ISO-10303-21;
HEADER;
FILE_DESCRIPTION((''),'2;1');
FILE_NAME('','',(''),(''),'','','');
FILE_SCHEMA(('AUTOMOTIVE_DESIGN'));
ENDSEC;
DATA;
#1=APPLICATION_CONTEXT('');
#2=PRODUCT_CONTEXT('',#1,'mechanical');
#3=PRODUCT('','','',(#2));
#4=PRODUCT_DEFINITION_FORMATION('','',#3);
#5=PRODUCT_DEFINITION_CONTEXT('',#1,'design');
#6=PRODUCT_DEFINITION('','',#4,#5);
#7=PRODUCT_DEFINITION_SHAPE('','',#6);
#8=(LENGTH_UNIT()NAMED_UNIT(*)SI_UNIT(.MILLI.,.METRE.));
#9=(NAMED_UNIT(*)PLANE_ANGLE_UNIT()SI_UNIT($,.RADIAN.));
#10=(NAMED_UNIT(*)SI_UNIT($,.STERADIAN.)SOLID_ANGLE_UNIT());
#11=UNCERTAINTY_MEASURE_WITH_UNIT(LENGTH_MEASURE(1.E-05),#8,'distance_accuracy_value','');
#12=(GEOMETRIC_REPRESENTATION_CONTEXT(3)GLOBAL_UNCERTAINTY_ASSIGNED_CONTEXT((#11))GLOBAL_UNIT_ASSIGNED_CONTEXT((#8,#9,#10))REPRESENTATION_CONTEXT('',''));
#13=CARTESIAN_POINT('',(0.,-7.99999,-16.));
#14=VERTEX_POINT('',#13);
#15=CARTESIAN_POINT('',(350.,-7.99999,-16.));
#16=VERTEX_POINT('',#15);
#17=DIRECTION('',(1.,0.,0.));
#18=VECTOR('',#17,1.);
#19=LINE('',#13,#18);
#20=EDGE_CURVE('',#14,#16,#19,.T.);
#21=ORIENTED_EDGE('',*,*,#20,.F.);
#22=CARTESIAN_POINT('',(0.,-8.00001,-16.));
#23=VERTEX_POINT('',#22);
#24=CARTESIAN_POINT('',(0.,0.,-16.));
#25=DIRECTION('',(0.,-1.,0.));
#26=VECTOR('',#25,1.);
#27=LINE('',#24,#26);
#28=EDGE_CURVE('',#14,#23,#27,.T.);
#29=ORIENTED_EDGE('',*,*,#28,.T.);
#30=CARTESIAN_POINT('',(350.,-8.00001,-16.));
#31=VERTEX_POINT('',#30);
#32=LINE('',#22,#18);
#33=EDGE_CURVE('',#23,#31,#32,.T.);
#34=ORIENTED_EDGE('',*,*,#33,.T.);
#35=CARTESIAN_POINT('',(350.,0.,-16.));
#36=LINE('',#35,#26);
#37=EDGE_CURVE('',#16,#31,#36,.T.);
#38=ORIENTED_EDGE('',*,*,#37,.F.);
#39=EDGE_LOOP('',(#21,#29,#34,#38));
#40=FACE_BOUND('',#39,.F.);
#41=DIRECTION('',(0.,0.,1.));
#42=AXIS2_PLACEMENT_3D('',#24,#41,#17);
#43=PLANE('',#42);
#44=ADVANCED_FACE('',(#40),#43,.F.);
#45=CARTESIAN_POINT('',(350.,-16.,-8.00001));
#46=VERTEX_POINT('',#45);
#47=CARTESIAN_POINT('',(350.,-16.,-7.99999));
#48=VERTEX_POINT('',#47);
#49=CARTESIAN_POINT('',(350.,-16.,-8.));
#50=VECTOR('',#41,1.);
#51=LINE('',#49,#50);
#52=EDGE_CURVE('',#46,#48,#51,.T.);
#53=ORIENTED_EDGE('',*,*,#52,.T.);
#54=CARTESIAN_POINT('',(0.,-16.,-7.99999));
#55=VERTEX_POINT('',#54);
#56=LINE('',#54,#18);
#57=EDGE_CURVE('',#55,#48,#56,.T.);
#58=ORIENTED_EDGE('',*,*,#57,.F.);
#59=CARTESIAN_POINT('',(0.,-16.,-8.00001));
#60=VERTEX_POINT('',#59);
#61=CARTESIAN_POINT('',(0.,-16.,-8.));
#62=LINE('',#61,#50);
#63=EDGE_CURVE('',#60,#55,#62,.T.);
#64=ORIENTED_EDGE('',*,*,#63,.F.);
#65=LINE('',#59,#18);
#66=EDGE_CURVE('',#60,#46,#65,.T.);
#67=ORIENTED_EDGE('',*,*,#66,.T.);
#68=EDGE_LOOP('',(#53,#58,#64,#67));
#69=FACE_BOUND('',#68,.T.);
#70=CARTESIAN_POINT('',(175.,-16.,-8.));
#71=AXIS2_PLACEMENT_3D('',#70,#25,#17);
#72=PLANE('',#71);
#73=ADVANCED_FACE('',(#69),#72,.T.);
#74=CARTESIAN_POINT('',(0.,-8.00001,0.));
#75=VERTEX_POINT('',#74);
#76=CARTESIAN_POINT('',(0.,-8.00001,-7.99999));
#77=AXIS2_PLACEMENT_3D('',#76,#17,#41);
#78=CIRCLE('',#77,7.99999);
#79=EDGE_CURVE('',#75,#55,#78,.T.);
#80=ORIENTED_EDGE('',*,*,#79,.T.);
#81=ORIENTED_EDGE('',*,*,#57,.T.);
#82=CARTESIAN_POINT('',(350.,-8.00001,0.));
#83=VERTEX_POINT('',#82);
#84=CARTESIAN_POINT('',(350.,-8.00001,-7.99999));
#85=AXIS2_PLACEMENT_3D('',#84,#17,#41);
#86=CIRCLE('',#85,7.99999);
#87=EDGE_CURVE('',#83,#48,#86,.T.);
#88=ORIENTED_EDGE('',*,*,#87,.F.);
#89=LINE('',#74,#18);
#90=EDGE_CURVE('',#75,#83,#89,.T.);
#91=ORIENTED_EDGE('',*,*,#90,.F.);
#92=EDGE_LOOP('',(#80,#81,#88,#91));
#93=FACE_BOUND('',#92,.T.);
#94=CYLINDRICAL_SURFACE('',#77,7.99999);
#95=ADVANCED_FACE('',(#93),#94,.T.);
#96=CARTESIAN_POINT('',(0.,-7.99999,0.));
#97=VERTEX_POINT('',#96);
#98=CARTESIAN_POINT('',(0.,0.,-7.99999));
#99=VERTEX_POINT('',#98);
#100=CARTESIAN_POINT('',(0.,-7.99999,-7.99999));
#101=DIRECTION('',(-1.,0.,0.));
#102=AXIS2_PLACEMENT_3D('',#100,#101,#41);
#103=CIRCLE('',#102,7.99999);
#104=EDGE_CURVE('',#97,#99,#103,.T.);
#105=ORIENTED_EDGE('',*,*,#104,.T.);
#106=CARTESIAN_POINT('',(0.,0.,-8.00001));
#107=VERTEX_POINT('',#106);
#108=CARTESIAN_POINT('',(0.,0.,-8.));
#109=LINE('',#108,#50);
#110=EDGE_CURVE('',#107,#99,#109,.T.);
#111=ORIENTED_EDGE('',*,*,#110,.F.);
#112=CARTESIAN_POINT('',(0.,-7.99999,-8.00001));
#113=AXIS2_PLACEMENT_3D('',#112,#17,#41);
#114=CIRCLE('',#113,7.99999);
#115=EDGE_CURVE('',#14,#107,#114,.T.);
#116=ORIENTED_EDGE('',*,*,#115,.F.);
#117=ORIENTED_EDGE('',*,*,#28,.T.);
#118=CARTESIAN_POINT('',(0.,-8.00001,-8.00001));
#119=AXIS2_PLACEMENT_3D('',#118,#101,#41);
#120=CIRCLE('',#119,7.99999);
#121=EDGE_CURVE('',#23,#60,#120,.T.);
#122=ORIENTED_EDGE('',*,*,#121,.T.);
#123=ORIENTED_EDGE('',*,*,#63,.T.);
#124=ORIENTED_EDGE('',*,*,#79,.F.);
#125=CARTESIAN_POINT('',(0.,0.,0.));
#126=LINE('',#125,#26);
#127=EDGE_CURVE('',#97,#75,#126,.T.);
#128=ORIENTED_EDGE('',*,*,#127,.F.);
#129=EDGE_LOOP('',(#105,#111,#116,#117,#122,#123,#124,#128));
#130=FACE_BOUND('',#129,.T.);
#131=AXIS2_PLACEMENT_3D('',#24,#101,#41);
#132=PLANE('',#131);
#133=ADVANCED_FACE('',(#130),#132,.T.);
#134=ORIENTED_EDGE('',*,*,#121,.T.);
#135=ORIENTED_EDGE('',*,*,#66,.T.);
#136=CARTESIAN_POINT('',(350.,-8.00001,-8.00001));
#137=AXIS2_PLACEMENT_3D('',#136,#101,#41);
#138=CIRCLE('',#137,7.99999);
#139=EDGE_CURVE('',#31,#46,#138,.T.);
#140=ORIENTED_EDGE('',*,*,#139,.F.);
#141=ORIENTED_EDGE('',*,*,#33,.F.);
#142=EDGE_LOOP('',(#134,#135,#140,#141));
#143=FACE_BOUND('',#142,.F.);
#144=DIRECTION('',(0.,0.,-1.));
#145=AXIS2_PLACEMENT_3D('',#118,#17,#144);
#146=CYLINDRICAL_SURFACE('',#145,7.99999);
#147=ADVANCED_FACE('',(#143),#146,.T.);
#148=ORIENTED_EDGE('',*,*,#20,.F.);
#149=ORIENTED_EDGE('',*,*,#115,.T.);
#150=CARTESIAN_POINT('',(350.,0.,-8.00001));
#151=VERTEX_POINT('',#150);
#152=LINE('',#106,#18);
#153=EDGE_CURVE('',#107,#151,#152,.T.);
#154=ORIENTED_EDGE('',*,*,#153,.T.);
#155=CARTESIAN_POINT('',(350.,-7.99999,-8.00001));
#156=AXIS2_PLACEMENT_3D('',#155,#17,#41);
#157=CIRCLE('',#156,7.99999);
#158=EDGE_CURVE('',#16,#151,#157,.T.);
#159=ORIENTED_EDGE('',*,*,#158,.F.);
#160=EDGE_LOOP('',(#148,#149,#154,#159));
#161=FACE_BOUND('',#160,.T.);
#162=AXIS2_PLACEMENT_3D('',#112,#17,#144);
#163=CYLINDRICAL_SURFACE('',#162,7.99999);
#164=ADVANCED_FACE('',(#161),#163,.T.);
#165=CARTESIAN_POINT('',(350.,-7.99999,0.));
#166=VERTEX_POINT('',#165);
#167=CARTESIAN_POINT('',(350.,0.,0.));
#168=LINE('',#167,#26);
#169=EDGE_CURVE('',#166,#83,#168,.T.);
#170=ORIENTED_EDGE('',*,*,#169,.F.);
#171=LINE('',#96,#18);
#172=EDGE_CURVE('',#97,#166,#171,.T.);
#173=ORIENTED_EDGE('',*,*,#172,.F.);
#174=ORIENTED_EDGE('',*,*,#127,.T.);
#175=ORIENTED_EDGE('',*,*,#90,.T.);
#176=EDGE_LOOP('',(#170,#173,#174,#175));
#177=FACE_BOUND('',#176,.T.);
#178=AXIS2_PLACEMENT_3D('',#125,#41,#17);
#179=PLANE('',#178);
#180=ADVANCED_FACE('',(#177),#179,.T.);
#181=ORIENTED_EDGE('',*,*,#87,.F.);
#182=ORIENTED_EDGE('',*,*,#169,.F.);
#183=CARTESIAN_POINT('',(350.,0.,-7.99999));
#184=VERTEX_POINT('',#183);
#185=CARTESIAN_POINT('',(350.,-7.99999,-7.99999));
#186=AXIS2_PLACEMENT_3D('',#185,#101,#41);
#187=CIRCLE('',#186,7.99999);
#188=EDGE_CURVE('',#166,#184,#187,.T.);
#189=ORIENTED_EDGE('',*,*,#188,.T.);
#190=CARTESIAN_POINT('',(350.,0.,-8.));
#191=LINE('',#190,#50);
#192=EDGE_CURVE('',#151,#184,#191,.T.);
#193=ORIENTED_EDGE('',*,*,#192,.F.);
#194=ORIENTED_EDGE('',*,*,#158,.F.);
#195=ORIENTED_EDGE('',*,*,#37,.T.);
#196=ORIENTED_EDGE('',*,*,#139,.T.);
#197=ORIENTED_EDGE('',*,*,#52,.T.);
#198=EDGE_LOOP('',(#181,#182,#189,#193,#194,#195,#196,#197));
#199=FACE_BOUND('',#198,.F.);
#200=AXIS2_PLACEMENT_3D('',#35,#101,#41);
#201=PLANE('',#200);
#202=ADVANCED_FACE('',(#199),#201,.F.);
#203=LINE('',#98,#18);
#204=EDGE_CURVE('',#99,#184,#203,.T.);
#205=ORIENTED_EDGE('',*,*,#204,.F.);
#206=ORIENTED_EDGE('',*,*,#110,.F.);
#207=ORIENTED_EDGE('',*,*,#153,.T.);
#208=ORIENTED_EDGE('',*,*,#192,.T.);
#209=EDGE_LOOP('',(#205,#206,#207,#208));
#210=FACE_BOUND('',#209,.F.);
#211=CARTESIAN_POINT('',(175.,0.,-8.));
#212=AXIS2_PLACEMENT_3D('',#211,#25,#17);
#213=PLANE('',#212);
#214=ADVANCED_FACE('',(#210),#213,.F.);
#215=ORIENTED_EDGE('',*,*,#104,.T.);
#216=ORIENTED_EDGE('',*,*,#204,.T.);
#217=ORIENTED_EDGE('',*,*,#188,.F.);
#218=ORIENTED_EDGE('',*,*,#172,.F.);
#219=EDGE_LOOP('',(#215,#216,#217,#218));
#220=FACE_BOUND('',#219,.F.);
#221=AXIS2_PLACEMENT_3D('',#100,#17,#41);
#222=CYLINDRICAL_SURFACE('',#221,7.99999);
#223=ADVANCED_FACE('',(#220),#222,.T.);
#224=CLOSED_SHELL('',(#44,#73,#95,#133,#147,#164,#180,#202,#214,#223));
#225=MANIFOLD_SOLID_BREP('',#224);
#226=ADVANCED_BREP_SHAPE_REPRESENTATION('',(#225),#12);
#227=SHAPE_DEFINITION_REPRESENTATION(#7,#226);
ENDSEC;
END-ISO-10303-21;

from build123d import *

# Parameters (mm, degrees)
F0_W     = 350
F0_H     = 16
F1_DEPTH = 16
F2_R     = 7.99999


# Not quite as in the source:
# - a fillet or chamfer is up to 0.001 mm smaller than in the source, because OpenCascade refuses the exact size
# - a feature names something its author has since deleted; it is built from what else it names


with BuildPart() as f1:
    # F0 (on Front) → F1 (new body)
    with BuildSketch(Plane.XZ):
        with Locations((175, -8)):
            Rectangle(F0_W, F0_H)
    extrude(amount=F1_DEPTH)

    # F2 (radius 8 in the source; OpenCascade refuses exactly that, so slightly less here)
    f2_edges = [f1.edges().sort_by_distance(p)[0] for p in [
        (175, -16, 0),
        (175, -16, -16),
        (175, 0, -16),
        (175, 0, 0),
    ]]
    fillet(f2_edges, radius=F2_R)


solid = f1.part
